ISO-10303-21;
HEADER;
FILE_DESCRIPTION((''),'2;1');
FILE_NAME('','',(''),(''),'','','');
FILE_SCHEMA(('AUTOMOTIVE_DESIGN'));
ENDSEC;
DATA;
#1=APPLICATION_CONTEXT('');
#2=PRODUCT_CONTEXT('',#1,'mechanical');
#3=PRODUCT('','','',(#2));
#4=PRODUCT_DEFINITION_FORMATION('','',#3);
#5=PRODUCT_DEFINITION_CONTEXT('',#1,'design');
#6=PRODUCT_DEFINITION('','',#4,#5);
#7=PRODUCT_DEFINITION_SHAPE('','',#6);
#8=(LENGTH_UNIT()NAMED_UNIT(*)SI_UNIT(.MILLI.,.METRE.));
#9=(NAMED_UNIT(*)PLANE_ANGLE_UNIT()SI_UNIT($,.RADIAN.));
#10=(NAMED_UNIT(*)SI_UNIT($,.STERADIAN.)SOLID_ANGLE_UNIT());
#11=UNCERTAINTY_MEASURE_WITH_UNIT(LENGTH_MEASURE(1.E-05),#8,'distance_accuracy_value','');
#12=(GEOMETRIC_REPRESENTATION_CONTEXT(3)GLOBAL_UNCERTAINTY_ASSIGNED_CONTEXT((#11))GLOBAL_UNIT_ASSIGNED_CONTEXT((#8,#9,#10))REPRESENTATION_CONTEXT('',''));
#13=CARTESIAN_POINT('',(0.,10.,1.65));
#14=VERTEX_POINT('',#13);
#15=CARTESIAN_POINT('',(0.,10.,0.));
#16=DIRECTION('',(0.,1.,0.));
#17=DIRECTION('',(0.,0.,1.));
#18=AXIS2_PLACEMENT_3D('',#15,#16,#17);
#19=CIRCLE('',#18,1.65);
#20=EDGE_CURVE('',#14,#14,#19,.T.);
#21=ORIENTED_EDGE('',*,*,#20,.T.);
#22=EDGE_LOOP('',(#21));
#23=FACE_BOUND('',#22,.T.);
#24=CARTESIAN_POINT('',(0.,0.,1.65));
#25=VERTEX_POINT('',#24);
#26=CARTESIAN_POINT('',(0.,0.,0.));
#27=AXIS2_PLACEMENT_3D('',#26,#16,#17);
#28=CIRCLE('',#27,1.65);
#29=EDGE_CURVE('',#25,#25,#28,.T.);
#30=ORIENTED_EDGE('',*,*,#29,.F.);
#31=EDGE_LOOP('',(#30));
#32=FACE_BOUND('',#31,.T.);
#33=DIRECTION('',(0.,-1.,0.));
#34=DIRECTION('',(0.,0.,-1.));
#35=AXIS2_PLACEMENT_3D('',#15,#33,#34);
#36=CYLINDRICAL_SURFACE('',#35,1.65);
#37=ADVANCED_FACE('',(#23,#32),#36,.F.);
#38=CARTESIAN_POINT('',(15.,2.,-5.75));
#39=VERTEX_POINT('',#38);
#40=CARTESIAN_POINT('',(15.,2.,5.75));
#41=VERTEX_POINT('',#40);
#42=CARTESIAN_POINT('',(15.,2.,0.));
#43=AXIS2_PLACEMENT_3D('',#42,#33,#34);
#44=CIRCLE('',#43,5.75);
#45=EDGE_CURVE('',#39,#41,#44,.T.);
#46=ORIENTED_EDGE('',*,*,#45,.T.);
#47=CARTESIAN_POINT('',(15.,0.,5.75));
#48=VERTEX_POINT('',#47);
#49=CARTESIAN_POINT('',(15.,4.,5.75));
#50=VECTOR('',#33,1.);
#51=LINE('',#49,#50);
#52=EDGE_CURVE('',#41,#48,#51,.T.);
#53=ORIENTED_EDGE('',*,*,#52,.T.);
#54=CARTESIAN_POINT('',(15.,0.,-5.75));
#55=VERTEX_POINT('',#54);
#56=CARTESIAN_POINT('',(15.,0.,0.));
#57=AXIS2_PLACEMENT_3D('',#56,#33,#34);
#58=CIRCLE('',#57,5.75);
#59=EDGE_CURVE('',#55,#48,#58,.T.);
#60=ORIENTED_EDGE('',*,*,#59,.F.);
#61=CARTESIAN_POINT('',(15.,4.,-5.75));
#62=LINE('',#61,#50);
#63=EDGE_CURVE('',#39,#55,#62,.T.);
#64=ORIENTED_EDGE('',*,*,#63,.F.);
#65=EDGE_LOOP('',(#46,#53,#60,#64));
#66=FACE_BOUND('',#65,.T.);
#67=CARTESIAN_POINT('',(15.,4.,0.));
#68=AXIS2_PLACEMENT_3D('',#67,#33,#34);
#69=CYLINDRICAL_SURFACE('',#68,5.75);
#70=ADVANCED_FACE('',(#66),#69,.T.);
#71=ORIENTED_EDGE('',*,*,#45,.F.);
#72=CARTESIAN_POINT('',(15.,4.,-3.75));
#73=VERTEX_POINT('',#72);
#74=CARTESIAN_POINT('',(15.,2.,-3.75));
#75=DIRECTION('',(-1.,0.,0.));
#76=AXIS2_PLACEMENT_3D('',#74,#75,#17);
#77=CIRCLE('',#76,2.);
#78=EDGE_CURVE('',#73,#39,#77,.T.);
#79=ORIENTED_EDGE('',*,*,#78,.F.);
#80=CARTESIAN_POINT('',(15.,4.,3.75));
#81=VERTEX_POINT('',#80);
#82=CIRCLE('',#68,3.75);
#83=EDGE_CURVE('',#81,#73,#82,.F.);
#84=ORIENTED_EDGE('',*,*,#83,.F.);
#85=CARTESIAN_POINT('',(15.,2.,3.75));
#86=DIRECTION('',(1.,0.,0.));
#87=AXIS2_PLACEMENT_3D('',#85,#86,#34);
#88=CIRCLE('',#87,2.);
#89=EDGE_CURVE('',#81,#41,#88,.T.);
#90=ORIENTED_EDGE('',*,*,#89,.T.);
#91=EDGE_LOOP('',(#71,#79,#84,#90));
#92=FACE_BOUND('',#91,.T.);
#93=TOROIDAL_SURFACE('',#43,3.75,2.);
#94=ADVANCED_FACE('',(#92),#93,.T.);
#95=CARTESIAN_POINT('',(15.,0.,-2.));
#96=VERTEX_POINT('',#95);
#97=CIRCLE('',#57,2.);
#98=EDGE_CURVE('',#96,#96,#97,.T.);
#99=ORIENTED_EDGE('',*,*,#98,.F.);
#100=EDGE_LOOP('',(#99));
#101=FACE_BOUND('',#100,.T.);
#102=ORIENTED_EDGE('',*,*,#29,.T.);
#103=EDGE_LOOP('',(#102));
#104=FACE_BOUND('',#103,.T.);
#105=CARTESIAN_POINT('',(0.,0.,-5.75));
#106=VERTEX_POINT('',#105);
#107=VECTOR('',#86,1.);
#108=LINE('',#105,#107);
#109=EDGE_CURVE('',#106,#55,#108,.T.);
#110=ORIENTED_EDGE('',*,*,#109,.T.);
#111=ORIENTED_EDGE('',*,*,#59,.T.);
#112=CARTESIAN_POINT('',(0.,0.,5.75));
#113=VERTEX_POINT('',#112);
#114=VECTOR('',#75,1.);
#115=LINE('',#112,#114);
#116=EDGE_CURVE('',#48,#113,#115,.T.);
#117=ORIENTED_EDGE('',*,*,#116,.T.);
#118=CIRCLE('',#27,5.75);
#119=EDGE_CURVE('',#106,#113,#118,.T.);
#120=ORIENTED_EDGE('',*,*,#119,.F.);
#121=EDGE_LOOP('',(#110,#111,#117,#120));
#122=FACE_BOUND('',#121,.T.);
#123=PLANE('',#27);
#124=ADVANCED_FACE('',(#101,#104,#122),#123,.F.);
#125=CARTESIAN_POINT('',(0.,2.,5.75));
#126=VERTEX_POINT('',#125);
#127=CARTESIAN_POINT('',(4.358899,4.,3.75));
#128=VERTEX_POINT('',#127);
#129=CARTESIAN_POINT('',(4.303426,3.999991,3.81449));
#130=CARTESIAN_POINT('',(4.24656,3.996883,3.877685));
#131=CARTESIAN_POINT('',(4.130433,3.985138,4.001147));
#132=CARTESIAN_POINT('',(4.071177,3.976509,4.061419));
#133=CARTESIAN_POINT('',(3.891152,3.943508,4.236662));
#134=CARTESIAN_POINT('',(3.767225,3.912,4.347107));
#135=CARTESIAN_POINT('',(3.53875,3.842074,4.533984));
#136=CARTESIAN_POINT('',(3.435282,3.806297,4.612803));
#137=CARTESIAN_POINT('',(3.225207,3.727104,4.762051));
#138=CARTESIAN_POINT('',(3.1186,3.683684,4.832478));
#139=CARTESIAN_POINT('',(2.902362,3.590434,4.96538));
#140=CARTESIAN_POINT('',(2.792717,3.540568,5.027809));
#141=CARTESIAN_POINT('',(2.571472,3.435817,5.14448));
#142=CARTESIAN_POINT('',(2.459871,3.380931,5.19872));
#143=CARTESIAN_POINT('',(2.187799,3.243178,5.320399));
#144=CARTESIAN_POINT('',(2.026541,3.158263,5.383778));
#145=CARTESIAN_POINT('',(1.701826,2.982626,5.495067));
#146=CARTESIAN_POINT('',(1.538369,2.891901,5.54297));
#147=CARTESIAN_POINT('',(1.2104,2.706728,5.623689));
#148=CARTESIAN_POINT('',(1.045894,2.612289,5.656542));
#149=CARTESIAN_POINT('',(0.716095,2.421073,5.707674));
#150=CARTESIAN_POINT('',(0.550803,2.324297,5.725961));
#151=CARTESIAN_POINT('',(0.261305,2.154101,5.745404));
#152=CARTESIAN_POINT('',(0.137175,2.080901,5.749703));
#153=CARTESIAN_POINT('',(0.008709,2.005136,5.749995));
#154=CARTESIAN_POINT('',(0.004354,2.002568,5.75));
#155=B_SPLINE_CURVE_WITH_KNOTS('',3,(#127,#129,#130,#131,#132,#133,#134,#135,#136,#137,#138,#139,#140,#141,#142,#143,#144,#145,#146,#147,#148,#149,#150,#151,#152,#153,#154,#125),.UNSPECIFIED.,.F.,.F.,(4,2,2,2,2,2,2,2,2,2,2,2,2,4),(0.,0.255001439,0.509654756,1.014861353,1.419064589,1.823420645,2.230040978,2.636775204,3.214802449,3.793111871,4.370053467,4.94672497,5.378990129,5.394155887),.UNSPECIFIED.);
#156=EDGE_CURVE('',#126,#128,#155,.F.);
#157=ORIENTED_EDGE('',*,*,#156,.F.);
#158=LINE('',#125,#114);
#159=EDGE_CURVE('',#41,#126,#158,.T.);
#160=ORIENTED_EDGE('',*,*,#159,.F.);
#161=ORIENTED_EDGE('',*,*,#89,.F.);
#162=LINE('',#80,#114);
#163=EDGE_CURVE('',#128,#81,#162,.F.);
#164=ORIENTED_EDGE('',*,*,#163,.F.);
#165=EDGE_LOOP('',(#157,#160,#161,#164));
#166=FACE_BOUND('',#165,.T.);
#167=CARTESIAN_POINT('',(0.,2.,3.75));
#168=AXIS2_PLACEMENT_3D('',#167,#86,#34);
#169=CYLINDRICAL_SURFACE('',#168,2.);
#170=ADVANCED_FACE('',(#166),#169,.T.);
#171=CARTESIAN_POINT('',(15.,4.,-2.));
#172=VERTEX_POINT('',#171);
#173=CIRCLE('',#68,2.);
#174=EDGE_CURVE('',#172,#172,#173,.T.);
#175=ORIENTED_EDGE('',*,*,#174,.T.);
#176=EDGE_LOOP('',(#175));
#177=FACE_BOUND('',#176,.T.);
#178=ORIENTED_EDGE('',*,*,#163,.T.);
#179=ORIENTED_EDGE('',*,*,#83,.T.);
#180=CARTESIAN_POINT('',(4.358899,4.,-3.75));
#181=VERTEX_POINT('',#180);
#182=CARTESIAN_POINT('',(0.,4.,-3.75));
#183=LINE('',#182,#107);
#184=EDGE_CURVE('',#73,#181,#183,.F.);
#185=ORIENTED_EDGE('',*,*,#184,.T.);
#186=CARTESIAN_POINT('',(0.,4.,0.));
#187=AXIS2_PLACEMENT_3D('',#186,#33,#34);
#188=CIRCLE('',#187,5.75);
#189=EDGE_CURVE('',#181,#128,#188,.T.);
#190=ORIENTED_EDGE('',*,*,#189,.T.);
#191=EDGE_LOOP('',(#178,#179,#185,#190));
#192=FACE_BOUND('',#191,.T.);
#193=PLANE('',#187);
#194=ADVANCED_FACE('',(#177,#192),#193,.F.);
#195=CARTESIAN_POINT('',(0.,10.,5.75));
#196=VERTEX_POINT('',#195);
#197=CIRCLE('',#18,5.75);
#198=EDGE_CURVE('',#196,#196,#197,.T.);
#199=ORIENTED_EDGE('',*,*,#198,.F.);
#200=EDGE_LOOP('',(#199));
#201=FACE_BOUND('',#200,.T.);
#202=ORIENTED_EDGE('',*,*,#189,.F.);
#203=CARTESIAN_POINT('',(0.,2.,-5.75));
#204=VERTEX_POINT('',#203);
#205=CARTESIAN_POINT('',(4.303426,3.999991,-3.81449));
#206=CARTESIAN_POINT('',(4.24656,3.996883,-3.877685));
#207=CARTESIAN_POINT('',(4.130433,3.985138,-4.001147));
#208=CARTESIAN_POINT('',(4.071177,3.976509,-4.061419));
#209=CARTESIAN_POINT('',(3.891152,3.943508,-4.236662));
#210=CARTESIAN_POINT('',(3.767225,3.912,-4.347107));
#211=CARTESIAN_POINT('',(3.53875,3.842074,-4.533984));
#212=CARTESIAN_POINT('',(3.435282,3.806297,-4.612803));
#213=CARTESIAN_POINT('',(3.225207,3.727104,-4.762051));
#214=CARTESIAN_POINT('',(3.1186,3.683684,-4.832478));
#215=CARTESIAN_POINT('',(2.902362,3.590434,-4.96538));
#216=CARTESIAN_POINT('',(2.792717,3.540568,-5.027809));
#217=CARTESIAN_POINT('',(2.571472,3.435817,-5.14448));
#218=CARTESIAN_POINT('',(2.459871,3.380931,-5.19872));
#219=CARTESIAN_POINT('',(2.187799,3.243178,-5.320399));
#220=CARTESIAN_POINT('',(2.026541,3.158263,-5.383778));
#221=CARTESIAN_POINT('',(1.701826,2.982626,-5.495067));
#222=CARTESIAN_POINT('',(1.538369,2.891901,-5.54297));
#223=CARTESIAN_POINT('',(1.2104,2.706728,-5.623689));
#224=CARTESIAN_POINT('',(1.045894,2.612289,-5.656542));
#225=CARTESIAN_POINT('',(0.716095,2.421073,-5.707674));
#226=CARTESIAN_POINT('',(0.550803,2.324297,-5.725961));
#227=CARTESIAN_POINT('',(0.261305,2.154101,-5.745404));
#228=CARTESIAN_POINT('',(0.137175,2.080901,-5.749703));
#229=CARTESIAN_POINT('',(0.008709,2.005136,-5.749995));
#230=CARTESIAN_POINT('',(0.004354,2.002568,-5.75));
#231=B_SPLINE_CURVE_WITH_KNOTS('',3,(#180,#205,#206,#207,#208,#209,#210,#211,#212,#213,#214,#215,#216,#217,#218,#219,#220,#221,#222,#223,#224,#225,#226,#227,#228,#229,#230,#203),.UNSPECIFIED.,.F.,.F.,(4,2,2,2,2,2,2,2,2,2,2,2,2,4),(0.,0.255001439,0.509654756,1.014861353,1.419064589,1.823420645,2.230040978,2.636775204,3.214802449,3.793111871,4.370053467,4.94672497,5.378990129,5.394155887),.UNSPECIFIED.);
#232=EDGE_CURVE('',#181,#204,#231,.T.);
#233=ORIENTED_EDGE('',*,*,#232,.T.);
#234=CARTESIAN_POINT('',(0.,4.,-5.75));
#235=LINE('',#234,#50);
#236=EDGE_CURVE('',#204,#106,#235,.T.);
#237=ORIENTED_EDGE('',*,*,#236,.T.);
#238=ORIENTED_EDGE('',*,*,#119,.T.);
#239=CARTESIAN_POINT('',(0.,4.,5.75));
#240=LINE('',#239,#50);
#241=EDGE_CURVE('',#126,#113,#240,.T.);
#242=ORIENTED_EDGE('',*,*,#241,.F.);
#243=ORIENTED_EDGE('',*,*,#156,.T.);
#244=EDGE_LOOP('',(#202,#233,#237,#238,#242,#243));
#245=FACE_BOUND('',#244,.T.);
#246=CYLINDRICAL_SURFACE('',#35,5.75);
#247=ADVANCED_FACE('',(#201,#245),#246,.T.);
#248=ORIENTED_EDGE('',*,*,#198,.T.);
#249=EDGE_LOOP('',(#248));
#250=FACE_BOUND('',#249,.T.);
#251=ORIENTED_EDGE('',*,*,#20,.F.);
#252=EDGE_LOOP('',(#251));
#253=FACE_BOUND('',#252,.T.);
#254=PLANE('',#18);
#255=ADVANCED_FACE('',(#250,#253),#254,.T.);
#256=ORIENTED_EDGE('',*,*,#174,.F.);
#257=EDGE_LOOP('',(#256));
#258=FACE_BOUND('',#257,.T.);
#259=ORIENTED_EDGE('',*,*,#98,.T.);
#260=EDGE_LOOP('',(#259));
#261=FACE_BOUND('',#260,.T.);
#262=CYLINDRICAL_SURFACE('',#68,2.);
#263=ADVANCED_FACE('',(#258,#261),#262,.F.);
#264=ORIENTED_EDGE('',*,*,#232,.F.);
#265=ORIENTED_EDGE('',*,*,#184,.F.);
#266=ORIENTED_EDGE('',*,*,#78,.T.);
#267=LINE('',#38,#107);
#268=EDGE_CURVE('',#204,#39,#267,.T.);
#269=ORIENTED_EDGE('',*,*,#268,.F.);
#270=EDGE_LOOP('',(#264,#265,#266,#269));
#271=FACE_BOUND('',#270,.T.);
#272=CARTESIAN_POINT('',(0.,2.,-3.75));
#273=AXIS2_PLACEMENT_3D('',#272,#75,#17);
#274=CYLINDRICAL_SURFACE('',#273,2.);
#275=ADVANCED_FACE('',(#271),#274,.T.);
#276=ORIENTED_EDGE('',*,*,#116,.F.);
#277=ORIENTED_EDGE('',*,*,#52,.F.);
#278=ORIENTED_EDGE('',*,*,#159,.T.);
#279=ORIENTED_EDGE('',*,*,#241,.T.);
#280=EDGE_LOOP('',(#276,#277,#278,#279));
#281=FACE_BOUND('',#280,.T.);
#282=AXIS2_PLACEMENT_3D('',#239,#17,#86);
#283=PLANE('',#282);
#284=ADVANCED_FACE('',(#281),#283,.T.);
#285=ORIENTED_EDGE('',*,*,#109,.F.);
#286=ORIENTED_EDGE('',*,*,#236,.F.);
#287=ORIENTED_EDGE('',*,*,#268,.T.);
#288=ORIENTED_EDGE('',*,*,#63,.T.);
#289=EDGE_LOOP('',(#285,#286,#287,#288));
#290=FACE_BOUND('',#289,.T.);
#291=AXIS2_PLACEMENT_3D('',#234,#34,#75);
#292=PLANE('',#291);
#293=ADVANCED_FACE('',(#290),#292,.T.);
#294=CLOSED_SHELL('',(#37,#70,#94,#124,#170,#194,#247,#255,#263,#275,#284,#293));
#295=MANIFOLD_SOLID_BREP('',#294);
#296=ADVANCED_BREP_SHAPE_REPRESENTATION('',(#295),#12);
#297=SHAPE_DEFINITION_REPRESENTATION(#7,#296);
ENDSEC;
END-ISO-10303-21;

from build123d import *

# Parameters (mm, degrees)
SKETCH1_R           = 5.75
SKETCH1_R_2         = 1.65
BOSS_EXTRUDE1_DEPTH = 10
SKETCH2_R           = 2
BOSS_EXTRUDE2_DEPTH = 4
FILLET1_R           = 2


with BuildPart() as part:
    # Sketch1 → Boss-Extrude1 (new body)
    with BuildSketch(Plane(origin=(0, 0, 0), x_dir=(1, 0, 0), z_dir=(0, 1, 0))):
        with Locations(Location((0, 0, 0), (0, 0, 270))):
            Circle(SKETCH1_R)
        with Locations(Location((0, 0, 0), (0, 0, 270))):
            Circle(SKETCH1_R_2, mode=Mode.SUBTRACT)
    extrude(amount=BOSS_EXTRUDE1_DEPTH)

    # Sketch2 → Boss-Extrude2 (add)
    # profile 1 of 4: a face of its own
    with BuildSketch(Plane.XZ):
        with BuildLine():
            ThreePointArc((20.75, 0), (19.065863992, 4.065863992), (15, 5.75))
            Line((15, 5.75), (9.25, 0))
            Line((9.25, 0), (15, -5.75))
            ThreePointArc((15, -5.75), (19.065863992, -4.065863992), (20.75, 0))
        make_face()
        with Locations(Location((15, 0, 0), (0, 0, 270))):
            Circle(SKETCH2_R, mode=Mode.SUBTRACT)
    # profile 2 of 4: a face of its own
    with BuildSketch(Plane.XZ):
        with BuildLine():
            Line((9.25, 0), (15, 5.75))
            ThreePointArc((15, 5.75), (10.934136008, 4.065863992), (9.25, 0))
        make_face()
    # profile 3 of 4: a face of its own
    with BuildSketch(Plane.XZ):
        with BuildLine():
            ThreePointArc((9.25, 0), (10.934136008, 4.065863992), (15, 5.75))
            Line((15, 5.75), (0, 5.75))
            ThreePointArc((0, 5.75), (4.065863992, 4.065863992), (5.75, 0))
            ThreePointArc((5.75, 0), (4.065863992, -4.065863992), (0, -5.75))
            Line((0, -5.75), (15, -5.75))
            ThreePointArc((15, -5.75), (10.934136008, -4.065863992), (9.25, 0))
        make_face()
    # profile 4 of 4: a face of its own
    with BuildSketch(Plane.XZ):
        with BuildLine():
            Line((15, -5.75), (9.25, 0))
            ThreePointArc((9.25, 0), (10.934136008, -4.065863992), (15, -5.75))
        make_face()
    extrude(amount=-BOSS_EXTRUDE2_DEPTH)

    # Fillet1
    # the kernel refuses this fillet: 2 mm, written as the material it takes off along each edge
    with BuildSketch(Plane(origin=(-5, 4, -5.75), x_dir=(0, 0, 1), z_dir=(1, 0, 0))) as fillet1_piece_1_section:
        with BuildLine():
            CenterArc((FILLET1_R, FILLET1_R), FILLET1_R, 180, 90)
            Line((0, FILLET1_R), (0, 0))
            Line((0, 0), (FILLET1_R, 0))
        make_face()
    fillet1_piece_1 = extrude(amount=20, mode=Mode.PRIVATE)
    fillet1_piece_1 = fillet1_piece_1 - Plane(origin=(0, 3.514129047, 0), x_dir=(0, 0, 1), z_dir=(0, -1, 0)) * Cylinder(5.75, 48, mode=Mode.PRIVATE)
    add(fillet1_piece_1, mode=Mode.SUBTRACT)
    with BuildSketch(Plane(origin=(15, 4, 5.75), x_dir=(0, -1, 0), z_dir=(-1, 0, 0))) as fillet1_piece_2_section:
        with BuildLine():
            CenterArc((FILLET1_R, -FILLET1_R), FILLET1_R, 90, 90)
            Line((0, -FILLET1_R), (0, 0))
            Line((0, 0), (FILLET1_R, 0))
        make_face()
    fillet1_piece_2 = extrude(amount=20, mode=Mode.PRIVATE)
    fillet1_piece_2 = fillet1_piece_2 - Plane(origin=(0, 3.514130378, 0), x_dir=(0, 0, 1), z_dir=(0, -1, 0)) * Cylinder(5.75, 48, mode=Mode.PRIVATE)
    add(fillet1_piece_2, mode=Mode.SUBTRACT)
    with BuildSketch(Plane(origin=(15, 4, 0), x_dir=(0, 0, -1), z_dir=(-1, 0, 0))) as fillet1_piece_3:
        with BuildLine():
            CenterArc((5.75 - FILLET1_R, FILLET1_R), FILLET1_R, 270, 90)
            Line((5.75, FILLET1_R), (5.75, 0))
            Line((5.75, 0), (5.75 - FILLET1_R, 0))
        make_face()
    revolve(axis=Axis((15, 4, 0), (0, -1, 0)), revolution_arc=180, mode=Mode.SUBTRACT)


solid = part.part
